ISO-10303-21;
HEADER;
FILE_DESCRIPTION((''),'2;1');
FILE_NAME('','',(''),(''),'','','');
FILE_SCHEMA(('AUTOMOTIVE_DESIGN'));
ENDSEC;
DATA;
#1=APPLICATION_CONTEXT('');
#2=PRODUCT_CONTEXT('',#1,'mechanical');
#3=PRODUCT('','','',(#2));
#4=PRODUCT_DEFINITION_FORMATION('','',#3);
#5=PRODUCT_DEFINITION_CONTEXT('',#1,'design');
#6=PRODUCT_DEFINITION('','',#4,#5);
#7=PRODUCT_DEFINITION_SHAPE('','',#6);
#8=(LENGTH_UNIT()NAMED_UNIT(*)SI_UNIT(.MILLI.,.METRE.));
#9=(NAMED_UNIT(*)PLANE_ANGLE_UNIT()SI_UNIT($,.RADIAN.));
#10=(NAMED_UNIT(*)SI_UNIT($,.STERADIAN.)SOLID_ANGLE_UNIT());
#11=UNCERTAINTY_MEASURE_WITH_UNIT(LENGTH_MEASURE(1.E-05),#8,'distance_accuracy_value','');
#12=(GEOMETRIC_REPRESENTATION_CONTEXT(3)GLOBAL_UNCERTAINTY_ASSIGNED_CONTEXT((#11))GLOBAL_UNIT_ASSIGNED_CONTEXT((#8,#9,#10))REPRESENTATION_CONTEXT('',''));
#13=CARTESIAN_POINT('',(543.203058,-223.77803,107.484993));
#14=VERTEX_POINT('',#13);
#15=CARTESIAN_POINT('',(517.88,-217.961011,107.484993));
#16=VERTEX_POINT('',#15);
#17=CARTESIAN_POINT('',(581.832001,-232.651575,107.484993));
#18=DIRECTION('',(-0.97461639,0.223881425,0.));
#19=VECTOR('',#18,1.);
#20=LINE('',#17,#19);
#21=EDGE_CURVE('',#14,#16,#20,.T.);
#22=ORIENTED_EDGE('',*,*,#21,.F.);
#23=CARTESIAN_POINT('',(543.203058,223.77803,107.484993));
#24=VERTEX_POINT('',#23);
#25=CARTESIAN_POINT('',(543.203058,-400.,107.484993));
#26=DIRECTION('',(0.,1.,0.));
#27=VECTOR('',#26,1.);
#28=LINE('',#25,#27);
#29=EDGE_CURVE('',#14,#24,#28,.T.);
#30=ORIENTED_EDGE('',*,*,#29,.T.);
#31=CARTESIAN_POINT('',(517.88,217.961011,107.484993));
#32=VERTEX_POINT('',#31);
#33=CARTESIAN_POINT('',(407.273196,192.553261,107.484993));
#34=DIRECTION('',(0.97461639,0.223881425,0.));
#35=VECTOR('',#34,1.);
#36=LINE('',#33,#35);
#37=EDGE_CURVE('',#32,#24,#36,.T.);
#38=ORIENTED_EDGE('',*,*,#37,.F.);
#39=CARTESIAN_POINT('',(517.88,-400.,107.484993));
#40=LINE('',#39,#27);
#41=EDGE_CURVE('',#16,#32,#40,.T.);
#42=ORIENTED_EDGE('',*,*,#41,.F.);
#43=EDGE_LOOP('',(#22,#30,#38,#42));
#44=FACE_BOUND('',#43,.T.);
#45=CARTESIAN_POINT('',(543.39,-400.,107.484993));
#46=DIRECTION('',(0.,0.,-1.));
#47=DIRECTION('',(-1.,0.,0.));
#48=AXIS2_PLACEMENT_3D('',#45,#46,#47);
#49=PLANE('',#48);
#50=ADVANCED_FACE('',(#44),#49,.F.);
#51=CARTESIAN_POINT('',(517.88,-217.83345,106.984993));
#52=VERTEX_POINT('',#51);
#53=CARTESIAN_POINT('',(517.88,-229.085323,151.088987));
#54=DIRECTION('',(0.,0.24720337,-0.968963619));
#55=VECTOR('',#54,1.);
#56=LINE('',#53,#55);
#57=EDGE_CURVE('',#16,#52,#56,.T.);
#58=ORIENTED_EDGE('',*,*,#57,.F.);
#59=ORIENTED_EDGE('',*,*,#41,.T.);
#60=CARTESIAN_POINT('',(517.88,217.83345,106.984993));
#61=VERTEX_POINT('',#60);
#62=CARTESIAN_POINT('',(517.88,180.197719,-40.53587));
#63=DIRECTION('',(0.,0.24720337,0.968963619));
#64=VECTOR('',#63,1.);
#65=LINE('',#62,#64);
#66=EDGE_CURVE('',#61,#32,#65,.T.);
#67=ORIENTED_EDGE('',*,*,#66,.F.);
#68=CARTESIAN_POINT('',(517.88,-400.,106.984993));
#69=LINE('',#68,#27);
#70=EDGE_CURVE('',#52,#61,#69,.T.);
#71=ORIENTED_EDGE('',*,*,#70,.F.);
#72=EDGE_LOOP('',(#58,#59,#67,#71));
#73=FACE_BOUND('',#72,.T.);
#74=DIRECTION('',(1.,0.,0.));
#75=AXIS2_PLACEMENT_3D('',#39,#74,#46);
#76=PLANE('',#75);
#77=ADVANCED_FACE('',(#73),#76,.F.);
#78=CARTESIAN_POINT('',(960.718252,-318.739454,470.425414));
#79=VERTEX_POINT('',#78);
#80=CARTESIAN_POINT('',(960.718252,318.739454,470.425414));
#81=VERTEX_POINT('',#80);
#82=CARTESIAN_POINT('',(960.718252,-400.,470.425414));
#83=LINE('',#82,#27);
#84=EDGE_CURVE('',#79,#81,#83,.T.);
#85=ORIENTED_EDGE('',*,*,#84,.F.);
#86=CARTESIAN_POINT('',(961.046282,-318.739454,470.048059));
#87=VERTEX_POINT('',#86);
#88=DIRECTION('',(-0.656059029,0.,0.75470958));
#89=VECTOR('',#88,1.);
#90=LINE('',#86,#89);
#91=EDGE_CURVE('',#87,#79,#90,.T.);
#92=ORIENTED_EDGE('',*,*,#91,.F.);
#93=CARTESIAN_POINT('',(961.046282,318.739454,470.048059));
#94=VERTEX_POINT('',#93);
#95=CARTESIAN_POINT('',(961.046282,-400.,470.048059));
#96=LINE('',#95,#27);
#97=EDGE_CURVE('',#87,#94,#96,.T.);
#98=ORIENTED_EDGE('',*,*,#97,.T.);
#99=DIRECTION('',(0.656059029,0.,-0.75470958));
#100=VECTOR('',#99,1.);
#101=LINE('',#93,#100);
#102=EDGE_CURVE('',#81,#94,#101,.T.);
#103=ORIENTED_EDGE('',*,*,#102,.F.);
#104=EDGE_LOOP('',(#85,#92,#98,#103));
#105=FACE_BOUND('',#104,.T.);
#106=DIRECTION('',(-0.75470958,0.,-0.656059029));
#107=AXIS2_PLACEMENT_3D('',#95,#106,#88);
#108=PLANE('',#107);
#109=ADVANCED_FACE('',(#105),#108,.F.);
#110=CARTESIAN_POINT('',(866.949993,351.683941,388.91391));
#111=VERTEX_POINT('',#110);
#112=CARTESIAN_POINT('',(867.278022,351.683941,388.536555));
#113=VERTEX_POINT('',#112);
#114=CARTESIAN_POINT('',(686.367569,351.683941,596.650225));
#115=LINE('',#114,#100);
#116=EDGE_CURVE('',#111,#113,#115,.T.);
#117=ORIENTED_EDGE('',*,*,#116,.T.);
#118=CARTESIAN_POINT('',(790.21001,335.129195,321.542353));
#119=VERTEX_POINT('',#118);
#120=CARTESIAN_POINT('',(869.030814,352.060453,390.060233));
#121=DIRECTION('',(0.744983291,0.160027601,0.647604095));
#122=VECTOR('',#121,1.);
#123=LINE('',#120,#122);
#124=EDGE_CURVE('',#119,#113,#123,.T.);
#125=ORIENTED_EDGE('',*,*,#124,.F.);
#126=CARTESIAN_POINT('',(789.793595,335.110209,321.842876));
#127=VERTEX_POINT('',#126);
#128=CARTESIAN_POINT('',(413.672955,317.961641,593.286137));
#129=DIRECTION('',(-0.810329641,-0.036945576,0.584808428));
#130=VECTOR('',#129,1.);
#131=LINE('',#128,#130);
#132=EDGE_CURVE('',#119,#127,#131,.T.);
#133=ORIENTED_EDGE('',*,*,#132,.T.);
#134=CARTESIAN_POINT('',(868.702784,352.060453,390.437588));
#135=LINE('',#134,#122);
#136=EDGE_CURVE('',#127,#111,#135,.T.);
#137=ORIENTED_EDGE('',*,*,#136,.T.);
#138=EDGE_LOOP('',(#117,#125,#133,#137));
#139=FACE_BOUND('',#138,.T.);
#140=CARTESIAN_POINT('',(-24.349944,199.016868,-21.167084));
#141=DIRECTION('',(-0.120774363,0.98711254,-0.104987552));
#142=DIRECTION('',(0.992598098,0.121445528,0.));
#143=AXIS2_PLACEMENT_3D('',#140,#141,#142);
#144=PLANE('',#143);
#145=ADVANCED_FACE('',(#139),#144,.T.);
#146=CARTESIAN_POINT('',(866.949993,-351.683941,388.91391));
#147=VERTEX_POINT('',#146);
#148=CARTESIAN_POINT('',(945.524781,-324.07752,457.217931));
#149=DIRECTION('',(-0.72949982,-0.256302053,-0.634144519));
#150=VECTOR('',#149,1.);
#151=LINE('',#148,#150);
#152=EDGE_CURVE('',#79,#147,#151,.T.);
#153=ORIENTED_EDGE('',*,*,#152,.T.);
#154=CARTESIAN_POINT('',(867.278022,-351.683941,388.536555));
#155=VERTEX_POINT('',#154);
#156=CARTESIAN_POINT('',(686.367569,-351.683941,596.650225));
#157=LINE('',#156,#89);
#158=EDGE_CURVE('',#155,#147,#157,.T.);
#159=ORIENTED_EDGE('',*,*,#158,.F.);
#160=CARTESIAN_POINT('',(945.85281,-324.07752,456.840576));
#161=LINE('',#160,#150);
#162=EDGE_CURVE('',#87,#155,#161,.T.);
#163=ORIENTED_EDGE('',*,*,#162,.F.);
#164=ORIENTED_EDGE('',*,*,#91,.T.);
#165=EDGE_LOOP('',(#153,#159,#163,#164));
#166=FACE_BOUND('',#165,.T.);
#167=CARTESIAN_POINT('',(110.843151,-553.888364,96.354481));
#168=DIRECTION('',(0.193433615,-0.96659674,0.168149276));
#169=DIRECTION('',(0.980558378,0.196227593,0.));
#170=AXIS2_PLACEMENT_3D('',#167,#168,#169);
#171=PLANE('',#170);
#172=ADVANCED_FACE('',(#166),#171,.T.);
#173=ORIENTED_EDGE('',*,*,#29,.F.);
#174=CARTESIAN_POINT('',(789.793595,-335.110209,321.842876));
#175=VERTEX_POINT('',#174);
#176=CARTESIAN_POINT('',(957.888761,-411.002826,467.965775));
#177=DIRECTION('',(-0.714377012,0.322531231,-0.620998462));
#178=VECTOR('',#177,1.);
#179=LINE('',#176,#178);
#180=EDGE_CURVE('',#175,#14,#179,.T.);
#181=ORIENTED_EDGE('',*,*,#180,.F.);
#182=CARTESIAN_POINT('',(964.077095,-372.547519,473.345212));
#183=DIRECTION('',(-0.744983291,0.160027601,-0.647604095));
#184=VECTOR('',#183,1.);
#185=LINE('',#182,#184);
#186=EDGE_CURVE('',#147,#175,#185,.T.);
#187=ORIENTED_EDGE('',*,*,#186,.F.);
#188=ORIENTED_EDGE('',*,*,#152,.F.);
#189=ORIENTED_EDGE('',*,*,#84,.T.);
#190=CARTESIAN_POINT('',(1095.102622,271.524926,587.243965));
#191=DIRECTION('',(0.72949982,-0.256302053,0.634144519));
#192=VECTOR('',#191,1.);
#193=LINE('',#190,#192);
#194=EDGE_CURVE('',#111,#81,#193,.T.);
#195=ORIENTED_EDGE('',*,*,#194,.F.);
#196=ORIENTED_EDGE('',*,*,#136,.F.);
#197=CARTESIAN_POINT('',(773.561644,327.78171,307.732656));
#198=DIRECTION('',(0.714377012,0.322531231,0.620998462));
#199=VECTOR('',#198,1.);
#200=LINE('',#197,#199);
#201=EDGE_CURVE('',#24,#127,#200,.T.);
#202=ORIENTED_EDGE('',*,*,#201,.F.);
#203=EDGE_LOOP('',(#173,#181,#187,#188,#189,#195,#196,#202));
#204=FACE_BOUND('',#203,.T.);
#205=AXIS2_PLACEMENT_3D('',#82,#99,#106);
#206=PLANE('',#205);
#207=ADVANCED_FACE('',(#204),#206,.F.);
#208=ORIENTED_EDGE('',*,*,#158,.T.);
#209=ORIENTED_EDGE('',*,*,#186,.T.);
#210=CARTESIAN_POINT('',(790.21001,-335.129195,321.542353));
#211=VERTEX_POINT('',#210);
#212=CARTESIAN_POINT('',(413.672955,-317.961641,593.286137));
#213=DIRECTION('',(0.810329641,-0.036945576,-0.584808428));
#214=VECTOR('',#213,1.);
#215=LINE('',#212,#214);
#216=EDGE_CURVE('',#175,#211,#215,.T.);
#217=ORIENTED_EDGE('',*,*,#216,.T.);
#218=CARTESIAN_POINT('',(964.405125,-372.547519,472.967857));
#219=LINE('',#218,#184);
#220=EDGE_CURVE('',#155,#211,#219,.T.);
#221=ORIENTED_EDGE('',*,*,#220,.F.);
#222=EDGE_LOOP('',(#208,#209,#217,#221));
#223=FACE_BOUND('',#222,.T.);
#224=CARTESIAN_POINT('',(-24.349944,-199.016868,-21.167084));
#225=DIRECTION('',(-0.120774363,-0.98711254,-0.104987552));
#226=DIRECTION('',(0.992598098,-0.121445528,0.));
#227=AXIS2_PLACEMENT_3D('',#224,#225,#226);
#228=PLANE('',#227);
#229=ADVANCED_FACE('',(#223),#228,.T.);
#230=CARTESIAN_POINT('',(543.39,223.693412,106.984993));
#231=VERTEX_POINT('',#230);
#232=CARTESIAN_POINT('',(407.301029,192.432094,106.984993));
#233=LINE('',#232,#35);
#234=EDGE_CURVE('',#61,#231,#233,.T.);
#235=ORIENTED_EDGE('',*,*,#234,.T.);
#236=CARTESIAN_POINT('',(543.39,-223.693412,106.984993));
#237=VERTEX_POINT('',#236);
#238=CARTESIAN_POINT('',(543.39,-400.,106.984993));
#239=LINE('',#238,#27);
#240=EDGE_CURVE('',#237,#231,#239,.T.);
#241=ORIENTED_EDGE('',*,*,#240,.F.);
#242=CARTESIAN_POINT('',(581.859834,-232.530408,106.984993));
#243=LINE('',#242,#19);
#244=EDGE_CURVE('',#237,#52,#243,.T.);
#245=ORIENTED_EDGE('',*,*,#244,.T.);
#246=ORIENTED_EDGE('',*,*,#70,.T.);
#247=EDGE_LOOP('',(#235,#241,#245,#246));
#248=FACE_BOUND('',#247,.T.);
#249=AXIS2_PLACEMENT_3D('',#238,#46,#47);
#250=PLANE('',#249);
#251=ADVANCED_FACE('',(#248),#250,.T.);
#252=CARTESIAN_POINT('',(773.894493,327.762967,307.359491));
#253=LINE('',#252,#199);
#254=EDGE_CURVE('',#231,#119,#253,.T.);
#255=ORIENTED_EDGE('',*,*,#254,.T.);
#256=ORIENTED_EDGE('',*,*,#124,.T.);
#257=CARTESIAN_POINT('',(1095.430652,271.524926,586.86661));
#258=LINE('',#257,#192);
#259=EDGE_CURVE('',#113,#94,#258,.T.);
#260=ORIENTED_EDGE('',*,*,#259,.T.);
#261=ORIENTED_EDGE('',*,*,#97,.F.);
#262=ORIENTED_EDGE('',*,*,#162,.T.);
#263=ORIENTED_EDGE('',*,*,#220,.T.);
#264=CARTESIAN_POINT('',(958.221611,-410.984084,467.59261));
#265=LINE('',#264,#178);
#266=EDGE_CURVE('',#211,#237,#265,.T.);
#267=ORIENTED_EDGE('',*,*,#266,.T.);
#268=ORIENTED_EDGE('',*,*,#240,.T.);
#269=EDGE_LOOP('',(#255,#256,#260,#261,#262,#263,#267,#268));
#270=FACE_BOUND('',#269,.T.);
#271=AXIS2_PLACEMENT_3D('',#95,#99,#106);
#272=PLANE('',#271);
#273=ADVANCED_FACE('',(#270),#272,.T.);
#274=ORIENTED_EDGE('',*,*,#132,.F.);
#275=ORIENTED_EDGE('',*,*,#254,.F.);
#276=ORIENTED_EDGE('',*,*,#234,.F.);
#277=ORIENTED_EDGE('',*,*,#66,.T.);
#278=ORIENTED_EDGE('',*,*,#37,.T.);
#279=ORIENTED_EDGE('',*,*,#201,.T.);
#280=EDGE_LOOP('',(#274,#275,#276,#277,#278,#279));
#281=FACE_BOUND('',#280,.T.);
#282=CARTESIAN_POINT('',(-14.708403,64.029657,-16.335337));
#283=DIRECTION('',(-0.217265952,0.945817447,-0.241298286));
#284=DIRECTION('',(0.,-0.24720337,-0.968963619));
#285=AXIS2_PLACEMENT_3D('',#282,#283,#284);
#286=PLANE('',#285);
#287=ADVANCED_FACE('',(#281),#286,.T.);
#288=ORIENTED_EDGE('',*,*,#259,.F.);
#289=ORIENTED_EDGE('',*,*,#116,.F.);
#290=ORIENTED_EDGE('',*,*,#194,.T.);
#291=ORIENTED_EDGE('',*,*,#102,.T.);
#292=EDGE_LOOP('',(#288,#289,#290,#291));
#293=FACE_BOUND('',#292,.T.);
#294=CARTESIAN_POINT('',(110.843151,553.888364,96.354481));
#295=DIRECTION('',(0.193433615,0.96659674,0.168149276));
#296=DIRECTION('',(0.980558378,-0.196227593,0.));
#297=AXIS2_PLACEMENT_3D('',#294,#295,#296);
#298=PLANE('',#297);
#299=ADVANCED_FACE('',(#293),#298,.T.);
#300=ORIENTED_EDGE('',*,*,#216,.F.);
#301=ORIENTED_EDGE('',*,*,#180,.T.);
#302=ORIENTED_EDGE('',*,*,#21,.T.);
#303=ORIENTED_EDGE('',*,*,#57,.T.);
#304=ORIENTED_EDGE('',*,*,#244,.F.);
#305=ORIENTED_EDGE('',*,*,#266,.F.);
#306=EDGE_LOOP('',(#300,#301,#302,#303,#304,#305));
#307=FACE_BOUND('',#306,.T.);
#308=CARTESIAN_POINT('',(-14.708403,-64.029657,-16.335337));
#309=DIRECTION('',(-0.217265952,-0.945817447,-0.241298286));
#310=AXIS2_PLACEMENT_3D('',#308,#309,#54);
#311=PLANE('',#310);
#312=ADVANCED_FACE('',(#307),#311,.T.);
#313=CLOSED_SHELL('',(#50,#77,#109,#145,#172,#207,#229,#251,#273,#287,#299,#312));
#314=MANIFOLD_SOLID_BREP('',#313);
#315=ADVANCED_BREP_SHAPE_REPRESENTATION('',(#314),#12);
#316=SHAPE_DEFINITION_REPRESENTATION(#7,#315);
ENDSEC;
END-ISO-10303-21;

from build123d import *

# Parameters (mm, degrees)
WYCI_GNI_CIE_CIENKA_CIANKA1_DEPTH      = 400
WYCI_GNI_CIE_CIENKA_CIANKA1_DEPTH_BACK = 400


# Read off the part's stored shape, not the designer's step: Lustro1
with BuildPart() as part:
    # Szkic1 → Wyciągnięcie-cienka ścianka1 (new, two sides: drawn at the far end of the back side and taken through both)
    with BuildSketch(Plane(origin=(0, 0, 0), x_dir=(1, 0, 0), z_dir=(0, 1, 0)).offset(-WYCI_GNI_CIE_CIENKA_CIANKA1_DEPTH_BACK)):
        Polygon((961.046281695, -470.048059203), (543.39, -106.98499256), (517.88, -106.98499256), (517.88, -107.48499256), (543.20305766, -107.48499256), (960.718252181, -470.425413993), align=None)
    extrude(amount=WYCI_GNI_CIE_CIENKA_CIANKA1_DEPTH + WYCI_GNI_CIE_CIENKA_CIANKA1_DEPTH_BACK)

    # Cięcie powierzchnią1
    split(bisect_by=Plane(origin=(-24.349944471, -199.016868, -21.167083796), x_dir=(0.7449832908348125, -0.1600276007809854, 0.6476040946173941), z_dir=(-0.12077436340947467, -0.987112540183885, -0.10498755238005406)), keep=Keep.BOTTOM)

    # Cięcie powierzchnią2
    split(bisect_by=Plane(origin=(110.843151094, -553.888363867, 96.354481224), x_dir=(0.7294998198065532, 0.25630205312360615, 0.6341445185971655), z_dir=(0.19343361492315114, -0.9665967398893007, 0.1681492761005468)), keep=Keep.BOTTOM)

    # Cięcie powierzchnią3
    split(bisect_by=Plane(origin=(-14.708403282, -64.029657214, -16.335336758), x_dir=(0.6328754019353329, -0.32469887066665304, 0.7028793417173329), z_dir=(-0.21726595221314635, -0.9458174471787884, -0.24129828557433775)), keep=Keep.BOTTOM)

    # Lustro1
    split(bisect_by=Plane.ZX, keep=Keep.BOTTOM)

    # Lustro1 2: part across plane


with BuildPart() as part_1:
    add(part.part)
    add(part.part.mirror(Plane.ZX))


solid = part_1.part
